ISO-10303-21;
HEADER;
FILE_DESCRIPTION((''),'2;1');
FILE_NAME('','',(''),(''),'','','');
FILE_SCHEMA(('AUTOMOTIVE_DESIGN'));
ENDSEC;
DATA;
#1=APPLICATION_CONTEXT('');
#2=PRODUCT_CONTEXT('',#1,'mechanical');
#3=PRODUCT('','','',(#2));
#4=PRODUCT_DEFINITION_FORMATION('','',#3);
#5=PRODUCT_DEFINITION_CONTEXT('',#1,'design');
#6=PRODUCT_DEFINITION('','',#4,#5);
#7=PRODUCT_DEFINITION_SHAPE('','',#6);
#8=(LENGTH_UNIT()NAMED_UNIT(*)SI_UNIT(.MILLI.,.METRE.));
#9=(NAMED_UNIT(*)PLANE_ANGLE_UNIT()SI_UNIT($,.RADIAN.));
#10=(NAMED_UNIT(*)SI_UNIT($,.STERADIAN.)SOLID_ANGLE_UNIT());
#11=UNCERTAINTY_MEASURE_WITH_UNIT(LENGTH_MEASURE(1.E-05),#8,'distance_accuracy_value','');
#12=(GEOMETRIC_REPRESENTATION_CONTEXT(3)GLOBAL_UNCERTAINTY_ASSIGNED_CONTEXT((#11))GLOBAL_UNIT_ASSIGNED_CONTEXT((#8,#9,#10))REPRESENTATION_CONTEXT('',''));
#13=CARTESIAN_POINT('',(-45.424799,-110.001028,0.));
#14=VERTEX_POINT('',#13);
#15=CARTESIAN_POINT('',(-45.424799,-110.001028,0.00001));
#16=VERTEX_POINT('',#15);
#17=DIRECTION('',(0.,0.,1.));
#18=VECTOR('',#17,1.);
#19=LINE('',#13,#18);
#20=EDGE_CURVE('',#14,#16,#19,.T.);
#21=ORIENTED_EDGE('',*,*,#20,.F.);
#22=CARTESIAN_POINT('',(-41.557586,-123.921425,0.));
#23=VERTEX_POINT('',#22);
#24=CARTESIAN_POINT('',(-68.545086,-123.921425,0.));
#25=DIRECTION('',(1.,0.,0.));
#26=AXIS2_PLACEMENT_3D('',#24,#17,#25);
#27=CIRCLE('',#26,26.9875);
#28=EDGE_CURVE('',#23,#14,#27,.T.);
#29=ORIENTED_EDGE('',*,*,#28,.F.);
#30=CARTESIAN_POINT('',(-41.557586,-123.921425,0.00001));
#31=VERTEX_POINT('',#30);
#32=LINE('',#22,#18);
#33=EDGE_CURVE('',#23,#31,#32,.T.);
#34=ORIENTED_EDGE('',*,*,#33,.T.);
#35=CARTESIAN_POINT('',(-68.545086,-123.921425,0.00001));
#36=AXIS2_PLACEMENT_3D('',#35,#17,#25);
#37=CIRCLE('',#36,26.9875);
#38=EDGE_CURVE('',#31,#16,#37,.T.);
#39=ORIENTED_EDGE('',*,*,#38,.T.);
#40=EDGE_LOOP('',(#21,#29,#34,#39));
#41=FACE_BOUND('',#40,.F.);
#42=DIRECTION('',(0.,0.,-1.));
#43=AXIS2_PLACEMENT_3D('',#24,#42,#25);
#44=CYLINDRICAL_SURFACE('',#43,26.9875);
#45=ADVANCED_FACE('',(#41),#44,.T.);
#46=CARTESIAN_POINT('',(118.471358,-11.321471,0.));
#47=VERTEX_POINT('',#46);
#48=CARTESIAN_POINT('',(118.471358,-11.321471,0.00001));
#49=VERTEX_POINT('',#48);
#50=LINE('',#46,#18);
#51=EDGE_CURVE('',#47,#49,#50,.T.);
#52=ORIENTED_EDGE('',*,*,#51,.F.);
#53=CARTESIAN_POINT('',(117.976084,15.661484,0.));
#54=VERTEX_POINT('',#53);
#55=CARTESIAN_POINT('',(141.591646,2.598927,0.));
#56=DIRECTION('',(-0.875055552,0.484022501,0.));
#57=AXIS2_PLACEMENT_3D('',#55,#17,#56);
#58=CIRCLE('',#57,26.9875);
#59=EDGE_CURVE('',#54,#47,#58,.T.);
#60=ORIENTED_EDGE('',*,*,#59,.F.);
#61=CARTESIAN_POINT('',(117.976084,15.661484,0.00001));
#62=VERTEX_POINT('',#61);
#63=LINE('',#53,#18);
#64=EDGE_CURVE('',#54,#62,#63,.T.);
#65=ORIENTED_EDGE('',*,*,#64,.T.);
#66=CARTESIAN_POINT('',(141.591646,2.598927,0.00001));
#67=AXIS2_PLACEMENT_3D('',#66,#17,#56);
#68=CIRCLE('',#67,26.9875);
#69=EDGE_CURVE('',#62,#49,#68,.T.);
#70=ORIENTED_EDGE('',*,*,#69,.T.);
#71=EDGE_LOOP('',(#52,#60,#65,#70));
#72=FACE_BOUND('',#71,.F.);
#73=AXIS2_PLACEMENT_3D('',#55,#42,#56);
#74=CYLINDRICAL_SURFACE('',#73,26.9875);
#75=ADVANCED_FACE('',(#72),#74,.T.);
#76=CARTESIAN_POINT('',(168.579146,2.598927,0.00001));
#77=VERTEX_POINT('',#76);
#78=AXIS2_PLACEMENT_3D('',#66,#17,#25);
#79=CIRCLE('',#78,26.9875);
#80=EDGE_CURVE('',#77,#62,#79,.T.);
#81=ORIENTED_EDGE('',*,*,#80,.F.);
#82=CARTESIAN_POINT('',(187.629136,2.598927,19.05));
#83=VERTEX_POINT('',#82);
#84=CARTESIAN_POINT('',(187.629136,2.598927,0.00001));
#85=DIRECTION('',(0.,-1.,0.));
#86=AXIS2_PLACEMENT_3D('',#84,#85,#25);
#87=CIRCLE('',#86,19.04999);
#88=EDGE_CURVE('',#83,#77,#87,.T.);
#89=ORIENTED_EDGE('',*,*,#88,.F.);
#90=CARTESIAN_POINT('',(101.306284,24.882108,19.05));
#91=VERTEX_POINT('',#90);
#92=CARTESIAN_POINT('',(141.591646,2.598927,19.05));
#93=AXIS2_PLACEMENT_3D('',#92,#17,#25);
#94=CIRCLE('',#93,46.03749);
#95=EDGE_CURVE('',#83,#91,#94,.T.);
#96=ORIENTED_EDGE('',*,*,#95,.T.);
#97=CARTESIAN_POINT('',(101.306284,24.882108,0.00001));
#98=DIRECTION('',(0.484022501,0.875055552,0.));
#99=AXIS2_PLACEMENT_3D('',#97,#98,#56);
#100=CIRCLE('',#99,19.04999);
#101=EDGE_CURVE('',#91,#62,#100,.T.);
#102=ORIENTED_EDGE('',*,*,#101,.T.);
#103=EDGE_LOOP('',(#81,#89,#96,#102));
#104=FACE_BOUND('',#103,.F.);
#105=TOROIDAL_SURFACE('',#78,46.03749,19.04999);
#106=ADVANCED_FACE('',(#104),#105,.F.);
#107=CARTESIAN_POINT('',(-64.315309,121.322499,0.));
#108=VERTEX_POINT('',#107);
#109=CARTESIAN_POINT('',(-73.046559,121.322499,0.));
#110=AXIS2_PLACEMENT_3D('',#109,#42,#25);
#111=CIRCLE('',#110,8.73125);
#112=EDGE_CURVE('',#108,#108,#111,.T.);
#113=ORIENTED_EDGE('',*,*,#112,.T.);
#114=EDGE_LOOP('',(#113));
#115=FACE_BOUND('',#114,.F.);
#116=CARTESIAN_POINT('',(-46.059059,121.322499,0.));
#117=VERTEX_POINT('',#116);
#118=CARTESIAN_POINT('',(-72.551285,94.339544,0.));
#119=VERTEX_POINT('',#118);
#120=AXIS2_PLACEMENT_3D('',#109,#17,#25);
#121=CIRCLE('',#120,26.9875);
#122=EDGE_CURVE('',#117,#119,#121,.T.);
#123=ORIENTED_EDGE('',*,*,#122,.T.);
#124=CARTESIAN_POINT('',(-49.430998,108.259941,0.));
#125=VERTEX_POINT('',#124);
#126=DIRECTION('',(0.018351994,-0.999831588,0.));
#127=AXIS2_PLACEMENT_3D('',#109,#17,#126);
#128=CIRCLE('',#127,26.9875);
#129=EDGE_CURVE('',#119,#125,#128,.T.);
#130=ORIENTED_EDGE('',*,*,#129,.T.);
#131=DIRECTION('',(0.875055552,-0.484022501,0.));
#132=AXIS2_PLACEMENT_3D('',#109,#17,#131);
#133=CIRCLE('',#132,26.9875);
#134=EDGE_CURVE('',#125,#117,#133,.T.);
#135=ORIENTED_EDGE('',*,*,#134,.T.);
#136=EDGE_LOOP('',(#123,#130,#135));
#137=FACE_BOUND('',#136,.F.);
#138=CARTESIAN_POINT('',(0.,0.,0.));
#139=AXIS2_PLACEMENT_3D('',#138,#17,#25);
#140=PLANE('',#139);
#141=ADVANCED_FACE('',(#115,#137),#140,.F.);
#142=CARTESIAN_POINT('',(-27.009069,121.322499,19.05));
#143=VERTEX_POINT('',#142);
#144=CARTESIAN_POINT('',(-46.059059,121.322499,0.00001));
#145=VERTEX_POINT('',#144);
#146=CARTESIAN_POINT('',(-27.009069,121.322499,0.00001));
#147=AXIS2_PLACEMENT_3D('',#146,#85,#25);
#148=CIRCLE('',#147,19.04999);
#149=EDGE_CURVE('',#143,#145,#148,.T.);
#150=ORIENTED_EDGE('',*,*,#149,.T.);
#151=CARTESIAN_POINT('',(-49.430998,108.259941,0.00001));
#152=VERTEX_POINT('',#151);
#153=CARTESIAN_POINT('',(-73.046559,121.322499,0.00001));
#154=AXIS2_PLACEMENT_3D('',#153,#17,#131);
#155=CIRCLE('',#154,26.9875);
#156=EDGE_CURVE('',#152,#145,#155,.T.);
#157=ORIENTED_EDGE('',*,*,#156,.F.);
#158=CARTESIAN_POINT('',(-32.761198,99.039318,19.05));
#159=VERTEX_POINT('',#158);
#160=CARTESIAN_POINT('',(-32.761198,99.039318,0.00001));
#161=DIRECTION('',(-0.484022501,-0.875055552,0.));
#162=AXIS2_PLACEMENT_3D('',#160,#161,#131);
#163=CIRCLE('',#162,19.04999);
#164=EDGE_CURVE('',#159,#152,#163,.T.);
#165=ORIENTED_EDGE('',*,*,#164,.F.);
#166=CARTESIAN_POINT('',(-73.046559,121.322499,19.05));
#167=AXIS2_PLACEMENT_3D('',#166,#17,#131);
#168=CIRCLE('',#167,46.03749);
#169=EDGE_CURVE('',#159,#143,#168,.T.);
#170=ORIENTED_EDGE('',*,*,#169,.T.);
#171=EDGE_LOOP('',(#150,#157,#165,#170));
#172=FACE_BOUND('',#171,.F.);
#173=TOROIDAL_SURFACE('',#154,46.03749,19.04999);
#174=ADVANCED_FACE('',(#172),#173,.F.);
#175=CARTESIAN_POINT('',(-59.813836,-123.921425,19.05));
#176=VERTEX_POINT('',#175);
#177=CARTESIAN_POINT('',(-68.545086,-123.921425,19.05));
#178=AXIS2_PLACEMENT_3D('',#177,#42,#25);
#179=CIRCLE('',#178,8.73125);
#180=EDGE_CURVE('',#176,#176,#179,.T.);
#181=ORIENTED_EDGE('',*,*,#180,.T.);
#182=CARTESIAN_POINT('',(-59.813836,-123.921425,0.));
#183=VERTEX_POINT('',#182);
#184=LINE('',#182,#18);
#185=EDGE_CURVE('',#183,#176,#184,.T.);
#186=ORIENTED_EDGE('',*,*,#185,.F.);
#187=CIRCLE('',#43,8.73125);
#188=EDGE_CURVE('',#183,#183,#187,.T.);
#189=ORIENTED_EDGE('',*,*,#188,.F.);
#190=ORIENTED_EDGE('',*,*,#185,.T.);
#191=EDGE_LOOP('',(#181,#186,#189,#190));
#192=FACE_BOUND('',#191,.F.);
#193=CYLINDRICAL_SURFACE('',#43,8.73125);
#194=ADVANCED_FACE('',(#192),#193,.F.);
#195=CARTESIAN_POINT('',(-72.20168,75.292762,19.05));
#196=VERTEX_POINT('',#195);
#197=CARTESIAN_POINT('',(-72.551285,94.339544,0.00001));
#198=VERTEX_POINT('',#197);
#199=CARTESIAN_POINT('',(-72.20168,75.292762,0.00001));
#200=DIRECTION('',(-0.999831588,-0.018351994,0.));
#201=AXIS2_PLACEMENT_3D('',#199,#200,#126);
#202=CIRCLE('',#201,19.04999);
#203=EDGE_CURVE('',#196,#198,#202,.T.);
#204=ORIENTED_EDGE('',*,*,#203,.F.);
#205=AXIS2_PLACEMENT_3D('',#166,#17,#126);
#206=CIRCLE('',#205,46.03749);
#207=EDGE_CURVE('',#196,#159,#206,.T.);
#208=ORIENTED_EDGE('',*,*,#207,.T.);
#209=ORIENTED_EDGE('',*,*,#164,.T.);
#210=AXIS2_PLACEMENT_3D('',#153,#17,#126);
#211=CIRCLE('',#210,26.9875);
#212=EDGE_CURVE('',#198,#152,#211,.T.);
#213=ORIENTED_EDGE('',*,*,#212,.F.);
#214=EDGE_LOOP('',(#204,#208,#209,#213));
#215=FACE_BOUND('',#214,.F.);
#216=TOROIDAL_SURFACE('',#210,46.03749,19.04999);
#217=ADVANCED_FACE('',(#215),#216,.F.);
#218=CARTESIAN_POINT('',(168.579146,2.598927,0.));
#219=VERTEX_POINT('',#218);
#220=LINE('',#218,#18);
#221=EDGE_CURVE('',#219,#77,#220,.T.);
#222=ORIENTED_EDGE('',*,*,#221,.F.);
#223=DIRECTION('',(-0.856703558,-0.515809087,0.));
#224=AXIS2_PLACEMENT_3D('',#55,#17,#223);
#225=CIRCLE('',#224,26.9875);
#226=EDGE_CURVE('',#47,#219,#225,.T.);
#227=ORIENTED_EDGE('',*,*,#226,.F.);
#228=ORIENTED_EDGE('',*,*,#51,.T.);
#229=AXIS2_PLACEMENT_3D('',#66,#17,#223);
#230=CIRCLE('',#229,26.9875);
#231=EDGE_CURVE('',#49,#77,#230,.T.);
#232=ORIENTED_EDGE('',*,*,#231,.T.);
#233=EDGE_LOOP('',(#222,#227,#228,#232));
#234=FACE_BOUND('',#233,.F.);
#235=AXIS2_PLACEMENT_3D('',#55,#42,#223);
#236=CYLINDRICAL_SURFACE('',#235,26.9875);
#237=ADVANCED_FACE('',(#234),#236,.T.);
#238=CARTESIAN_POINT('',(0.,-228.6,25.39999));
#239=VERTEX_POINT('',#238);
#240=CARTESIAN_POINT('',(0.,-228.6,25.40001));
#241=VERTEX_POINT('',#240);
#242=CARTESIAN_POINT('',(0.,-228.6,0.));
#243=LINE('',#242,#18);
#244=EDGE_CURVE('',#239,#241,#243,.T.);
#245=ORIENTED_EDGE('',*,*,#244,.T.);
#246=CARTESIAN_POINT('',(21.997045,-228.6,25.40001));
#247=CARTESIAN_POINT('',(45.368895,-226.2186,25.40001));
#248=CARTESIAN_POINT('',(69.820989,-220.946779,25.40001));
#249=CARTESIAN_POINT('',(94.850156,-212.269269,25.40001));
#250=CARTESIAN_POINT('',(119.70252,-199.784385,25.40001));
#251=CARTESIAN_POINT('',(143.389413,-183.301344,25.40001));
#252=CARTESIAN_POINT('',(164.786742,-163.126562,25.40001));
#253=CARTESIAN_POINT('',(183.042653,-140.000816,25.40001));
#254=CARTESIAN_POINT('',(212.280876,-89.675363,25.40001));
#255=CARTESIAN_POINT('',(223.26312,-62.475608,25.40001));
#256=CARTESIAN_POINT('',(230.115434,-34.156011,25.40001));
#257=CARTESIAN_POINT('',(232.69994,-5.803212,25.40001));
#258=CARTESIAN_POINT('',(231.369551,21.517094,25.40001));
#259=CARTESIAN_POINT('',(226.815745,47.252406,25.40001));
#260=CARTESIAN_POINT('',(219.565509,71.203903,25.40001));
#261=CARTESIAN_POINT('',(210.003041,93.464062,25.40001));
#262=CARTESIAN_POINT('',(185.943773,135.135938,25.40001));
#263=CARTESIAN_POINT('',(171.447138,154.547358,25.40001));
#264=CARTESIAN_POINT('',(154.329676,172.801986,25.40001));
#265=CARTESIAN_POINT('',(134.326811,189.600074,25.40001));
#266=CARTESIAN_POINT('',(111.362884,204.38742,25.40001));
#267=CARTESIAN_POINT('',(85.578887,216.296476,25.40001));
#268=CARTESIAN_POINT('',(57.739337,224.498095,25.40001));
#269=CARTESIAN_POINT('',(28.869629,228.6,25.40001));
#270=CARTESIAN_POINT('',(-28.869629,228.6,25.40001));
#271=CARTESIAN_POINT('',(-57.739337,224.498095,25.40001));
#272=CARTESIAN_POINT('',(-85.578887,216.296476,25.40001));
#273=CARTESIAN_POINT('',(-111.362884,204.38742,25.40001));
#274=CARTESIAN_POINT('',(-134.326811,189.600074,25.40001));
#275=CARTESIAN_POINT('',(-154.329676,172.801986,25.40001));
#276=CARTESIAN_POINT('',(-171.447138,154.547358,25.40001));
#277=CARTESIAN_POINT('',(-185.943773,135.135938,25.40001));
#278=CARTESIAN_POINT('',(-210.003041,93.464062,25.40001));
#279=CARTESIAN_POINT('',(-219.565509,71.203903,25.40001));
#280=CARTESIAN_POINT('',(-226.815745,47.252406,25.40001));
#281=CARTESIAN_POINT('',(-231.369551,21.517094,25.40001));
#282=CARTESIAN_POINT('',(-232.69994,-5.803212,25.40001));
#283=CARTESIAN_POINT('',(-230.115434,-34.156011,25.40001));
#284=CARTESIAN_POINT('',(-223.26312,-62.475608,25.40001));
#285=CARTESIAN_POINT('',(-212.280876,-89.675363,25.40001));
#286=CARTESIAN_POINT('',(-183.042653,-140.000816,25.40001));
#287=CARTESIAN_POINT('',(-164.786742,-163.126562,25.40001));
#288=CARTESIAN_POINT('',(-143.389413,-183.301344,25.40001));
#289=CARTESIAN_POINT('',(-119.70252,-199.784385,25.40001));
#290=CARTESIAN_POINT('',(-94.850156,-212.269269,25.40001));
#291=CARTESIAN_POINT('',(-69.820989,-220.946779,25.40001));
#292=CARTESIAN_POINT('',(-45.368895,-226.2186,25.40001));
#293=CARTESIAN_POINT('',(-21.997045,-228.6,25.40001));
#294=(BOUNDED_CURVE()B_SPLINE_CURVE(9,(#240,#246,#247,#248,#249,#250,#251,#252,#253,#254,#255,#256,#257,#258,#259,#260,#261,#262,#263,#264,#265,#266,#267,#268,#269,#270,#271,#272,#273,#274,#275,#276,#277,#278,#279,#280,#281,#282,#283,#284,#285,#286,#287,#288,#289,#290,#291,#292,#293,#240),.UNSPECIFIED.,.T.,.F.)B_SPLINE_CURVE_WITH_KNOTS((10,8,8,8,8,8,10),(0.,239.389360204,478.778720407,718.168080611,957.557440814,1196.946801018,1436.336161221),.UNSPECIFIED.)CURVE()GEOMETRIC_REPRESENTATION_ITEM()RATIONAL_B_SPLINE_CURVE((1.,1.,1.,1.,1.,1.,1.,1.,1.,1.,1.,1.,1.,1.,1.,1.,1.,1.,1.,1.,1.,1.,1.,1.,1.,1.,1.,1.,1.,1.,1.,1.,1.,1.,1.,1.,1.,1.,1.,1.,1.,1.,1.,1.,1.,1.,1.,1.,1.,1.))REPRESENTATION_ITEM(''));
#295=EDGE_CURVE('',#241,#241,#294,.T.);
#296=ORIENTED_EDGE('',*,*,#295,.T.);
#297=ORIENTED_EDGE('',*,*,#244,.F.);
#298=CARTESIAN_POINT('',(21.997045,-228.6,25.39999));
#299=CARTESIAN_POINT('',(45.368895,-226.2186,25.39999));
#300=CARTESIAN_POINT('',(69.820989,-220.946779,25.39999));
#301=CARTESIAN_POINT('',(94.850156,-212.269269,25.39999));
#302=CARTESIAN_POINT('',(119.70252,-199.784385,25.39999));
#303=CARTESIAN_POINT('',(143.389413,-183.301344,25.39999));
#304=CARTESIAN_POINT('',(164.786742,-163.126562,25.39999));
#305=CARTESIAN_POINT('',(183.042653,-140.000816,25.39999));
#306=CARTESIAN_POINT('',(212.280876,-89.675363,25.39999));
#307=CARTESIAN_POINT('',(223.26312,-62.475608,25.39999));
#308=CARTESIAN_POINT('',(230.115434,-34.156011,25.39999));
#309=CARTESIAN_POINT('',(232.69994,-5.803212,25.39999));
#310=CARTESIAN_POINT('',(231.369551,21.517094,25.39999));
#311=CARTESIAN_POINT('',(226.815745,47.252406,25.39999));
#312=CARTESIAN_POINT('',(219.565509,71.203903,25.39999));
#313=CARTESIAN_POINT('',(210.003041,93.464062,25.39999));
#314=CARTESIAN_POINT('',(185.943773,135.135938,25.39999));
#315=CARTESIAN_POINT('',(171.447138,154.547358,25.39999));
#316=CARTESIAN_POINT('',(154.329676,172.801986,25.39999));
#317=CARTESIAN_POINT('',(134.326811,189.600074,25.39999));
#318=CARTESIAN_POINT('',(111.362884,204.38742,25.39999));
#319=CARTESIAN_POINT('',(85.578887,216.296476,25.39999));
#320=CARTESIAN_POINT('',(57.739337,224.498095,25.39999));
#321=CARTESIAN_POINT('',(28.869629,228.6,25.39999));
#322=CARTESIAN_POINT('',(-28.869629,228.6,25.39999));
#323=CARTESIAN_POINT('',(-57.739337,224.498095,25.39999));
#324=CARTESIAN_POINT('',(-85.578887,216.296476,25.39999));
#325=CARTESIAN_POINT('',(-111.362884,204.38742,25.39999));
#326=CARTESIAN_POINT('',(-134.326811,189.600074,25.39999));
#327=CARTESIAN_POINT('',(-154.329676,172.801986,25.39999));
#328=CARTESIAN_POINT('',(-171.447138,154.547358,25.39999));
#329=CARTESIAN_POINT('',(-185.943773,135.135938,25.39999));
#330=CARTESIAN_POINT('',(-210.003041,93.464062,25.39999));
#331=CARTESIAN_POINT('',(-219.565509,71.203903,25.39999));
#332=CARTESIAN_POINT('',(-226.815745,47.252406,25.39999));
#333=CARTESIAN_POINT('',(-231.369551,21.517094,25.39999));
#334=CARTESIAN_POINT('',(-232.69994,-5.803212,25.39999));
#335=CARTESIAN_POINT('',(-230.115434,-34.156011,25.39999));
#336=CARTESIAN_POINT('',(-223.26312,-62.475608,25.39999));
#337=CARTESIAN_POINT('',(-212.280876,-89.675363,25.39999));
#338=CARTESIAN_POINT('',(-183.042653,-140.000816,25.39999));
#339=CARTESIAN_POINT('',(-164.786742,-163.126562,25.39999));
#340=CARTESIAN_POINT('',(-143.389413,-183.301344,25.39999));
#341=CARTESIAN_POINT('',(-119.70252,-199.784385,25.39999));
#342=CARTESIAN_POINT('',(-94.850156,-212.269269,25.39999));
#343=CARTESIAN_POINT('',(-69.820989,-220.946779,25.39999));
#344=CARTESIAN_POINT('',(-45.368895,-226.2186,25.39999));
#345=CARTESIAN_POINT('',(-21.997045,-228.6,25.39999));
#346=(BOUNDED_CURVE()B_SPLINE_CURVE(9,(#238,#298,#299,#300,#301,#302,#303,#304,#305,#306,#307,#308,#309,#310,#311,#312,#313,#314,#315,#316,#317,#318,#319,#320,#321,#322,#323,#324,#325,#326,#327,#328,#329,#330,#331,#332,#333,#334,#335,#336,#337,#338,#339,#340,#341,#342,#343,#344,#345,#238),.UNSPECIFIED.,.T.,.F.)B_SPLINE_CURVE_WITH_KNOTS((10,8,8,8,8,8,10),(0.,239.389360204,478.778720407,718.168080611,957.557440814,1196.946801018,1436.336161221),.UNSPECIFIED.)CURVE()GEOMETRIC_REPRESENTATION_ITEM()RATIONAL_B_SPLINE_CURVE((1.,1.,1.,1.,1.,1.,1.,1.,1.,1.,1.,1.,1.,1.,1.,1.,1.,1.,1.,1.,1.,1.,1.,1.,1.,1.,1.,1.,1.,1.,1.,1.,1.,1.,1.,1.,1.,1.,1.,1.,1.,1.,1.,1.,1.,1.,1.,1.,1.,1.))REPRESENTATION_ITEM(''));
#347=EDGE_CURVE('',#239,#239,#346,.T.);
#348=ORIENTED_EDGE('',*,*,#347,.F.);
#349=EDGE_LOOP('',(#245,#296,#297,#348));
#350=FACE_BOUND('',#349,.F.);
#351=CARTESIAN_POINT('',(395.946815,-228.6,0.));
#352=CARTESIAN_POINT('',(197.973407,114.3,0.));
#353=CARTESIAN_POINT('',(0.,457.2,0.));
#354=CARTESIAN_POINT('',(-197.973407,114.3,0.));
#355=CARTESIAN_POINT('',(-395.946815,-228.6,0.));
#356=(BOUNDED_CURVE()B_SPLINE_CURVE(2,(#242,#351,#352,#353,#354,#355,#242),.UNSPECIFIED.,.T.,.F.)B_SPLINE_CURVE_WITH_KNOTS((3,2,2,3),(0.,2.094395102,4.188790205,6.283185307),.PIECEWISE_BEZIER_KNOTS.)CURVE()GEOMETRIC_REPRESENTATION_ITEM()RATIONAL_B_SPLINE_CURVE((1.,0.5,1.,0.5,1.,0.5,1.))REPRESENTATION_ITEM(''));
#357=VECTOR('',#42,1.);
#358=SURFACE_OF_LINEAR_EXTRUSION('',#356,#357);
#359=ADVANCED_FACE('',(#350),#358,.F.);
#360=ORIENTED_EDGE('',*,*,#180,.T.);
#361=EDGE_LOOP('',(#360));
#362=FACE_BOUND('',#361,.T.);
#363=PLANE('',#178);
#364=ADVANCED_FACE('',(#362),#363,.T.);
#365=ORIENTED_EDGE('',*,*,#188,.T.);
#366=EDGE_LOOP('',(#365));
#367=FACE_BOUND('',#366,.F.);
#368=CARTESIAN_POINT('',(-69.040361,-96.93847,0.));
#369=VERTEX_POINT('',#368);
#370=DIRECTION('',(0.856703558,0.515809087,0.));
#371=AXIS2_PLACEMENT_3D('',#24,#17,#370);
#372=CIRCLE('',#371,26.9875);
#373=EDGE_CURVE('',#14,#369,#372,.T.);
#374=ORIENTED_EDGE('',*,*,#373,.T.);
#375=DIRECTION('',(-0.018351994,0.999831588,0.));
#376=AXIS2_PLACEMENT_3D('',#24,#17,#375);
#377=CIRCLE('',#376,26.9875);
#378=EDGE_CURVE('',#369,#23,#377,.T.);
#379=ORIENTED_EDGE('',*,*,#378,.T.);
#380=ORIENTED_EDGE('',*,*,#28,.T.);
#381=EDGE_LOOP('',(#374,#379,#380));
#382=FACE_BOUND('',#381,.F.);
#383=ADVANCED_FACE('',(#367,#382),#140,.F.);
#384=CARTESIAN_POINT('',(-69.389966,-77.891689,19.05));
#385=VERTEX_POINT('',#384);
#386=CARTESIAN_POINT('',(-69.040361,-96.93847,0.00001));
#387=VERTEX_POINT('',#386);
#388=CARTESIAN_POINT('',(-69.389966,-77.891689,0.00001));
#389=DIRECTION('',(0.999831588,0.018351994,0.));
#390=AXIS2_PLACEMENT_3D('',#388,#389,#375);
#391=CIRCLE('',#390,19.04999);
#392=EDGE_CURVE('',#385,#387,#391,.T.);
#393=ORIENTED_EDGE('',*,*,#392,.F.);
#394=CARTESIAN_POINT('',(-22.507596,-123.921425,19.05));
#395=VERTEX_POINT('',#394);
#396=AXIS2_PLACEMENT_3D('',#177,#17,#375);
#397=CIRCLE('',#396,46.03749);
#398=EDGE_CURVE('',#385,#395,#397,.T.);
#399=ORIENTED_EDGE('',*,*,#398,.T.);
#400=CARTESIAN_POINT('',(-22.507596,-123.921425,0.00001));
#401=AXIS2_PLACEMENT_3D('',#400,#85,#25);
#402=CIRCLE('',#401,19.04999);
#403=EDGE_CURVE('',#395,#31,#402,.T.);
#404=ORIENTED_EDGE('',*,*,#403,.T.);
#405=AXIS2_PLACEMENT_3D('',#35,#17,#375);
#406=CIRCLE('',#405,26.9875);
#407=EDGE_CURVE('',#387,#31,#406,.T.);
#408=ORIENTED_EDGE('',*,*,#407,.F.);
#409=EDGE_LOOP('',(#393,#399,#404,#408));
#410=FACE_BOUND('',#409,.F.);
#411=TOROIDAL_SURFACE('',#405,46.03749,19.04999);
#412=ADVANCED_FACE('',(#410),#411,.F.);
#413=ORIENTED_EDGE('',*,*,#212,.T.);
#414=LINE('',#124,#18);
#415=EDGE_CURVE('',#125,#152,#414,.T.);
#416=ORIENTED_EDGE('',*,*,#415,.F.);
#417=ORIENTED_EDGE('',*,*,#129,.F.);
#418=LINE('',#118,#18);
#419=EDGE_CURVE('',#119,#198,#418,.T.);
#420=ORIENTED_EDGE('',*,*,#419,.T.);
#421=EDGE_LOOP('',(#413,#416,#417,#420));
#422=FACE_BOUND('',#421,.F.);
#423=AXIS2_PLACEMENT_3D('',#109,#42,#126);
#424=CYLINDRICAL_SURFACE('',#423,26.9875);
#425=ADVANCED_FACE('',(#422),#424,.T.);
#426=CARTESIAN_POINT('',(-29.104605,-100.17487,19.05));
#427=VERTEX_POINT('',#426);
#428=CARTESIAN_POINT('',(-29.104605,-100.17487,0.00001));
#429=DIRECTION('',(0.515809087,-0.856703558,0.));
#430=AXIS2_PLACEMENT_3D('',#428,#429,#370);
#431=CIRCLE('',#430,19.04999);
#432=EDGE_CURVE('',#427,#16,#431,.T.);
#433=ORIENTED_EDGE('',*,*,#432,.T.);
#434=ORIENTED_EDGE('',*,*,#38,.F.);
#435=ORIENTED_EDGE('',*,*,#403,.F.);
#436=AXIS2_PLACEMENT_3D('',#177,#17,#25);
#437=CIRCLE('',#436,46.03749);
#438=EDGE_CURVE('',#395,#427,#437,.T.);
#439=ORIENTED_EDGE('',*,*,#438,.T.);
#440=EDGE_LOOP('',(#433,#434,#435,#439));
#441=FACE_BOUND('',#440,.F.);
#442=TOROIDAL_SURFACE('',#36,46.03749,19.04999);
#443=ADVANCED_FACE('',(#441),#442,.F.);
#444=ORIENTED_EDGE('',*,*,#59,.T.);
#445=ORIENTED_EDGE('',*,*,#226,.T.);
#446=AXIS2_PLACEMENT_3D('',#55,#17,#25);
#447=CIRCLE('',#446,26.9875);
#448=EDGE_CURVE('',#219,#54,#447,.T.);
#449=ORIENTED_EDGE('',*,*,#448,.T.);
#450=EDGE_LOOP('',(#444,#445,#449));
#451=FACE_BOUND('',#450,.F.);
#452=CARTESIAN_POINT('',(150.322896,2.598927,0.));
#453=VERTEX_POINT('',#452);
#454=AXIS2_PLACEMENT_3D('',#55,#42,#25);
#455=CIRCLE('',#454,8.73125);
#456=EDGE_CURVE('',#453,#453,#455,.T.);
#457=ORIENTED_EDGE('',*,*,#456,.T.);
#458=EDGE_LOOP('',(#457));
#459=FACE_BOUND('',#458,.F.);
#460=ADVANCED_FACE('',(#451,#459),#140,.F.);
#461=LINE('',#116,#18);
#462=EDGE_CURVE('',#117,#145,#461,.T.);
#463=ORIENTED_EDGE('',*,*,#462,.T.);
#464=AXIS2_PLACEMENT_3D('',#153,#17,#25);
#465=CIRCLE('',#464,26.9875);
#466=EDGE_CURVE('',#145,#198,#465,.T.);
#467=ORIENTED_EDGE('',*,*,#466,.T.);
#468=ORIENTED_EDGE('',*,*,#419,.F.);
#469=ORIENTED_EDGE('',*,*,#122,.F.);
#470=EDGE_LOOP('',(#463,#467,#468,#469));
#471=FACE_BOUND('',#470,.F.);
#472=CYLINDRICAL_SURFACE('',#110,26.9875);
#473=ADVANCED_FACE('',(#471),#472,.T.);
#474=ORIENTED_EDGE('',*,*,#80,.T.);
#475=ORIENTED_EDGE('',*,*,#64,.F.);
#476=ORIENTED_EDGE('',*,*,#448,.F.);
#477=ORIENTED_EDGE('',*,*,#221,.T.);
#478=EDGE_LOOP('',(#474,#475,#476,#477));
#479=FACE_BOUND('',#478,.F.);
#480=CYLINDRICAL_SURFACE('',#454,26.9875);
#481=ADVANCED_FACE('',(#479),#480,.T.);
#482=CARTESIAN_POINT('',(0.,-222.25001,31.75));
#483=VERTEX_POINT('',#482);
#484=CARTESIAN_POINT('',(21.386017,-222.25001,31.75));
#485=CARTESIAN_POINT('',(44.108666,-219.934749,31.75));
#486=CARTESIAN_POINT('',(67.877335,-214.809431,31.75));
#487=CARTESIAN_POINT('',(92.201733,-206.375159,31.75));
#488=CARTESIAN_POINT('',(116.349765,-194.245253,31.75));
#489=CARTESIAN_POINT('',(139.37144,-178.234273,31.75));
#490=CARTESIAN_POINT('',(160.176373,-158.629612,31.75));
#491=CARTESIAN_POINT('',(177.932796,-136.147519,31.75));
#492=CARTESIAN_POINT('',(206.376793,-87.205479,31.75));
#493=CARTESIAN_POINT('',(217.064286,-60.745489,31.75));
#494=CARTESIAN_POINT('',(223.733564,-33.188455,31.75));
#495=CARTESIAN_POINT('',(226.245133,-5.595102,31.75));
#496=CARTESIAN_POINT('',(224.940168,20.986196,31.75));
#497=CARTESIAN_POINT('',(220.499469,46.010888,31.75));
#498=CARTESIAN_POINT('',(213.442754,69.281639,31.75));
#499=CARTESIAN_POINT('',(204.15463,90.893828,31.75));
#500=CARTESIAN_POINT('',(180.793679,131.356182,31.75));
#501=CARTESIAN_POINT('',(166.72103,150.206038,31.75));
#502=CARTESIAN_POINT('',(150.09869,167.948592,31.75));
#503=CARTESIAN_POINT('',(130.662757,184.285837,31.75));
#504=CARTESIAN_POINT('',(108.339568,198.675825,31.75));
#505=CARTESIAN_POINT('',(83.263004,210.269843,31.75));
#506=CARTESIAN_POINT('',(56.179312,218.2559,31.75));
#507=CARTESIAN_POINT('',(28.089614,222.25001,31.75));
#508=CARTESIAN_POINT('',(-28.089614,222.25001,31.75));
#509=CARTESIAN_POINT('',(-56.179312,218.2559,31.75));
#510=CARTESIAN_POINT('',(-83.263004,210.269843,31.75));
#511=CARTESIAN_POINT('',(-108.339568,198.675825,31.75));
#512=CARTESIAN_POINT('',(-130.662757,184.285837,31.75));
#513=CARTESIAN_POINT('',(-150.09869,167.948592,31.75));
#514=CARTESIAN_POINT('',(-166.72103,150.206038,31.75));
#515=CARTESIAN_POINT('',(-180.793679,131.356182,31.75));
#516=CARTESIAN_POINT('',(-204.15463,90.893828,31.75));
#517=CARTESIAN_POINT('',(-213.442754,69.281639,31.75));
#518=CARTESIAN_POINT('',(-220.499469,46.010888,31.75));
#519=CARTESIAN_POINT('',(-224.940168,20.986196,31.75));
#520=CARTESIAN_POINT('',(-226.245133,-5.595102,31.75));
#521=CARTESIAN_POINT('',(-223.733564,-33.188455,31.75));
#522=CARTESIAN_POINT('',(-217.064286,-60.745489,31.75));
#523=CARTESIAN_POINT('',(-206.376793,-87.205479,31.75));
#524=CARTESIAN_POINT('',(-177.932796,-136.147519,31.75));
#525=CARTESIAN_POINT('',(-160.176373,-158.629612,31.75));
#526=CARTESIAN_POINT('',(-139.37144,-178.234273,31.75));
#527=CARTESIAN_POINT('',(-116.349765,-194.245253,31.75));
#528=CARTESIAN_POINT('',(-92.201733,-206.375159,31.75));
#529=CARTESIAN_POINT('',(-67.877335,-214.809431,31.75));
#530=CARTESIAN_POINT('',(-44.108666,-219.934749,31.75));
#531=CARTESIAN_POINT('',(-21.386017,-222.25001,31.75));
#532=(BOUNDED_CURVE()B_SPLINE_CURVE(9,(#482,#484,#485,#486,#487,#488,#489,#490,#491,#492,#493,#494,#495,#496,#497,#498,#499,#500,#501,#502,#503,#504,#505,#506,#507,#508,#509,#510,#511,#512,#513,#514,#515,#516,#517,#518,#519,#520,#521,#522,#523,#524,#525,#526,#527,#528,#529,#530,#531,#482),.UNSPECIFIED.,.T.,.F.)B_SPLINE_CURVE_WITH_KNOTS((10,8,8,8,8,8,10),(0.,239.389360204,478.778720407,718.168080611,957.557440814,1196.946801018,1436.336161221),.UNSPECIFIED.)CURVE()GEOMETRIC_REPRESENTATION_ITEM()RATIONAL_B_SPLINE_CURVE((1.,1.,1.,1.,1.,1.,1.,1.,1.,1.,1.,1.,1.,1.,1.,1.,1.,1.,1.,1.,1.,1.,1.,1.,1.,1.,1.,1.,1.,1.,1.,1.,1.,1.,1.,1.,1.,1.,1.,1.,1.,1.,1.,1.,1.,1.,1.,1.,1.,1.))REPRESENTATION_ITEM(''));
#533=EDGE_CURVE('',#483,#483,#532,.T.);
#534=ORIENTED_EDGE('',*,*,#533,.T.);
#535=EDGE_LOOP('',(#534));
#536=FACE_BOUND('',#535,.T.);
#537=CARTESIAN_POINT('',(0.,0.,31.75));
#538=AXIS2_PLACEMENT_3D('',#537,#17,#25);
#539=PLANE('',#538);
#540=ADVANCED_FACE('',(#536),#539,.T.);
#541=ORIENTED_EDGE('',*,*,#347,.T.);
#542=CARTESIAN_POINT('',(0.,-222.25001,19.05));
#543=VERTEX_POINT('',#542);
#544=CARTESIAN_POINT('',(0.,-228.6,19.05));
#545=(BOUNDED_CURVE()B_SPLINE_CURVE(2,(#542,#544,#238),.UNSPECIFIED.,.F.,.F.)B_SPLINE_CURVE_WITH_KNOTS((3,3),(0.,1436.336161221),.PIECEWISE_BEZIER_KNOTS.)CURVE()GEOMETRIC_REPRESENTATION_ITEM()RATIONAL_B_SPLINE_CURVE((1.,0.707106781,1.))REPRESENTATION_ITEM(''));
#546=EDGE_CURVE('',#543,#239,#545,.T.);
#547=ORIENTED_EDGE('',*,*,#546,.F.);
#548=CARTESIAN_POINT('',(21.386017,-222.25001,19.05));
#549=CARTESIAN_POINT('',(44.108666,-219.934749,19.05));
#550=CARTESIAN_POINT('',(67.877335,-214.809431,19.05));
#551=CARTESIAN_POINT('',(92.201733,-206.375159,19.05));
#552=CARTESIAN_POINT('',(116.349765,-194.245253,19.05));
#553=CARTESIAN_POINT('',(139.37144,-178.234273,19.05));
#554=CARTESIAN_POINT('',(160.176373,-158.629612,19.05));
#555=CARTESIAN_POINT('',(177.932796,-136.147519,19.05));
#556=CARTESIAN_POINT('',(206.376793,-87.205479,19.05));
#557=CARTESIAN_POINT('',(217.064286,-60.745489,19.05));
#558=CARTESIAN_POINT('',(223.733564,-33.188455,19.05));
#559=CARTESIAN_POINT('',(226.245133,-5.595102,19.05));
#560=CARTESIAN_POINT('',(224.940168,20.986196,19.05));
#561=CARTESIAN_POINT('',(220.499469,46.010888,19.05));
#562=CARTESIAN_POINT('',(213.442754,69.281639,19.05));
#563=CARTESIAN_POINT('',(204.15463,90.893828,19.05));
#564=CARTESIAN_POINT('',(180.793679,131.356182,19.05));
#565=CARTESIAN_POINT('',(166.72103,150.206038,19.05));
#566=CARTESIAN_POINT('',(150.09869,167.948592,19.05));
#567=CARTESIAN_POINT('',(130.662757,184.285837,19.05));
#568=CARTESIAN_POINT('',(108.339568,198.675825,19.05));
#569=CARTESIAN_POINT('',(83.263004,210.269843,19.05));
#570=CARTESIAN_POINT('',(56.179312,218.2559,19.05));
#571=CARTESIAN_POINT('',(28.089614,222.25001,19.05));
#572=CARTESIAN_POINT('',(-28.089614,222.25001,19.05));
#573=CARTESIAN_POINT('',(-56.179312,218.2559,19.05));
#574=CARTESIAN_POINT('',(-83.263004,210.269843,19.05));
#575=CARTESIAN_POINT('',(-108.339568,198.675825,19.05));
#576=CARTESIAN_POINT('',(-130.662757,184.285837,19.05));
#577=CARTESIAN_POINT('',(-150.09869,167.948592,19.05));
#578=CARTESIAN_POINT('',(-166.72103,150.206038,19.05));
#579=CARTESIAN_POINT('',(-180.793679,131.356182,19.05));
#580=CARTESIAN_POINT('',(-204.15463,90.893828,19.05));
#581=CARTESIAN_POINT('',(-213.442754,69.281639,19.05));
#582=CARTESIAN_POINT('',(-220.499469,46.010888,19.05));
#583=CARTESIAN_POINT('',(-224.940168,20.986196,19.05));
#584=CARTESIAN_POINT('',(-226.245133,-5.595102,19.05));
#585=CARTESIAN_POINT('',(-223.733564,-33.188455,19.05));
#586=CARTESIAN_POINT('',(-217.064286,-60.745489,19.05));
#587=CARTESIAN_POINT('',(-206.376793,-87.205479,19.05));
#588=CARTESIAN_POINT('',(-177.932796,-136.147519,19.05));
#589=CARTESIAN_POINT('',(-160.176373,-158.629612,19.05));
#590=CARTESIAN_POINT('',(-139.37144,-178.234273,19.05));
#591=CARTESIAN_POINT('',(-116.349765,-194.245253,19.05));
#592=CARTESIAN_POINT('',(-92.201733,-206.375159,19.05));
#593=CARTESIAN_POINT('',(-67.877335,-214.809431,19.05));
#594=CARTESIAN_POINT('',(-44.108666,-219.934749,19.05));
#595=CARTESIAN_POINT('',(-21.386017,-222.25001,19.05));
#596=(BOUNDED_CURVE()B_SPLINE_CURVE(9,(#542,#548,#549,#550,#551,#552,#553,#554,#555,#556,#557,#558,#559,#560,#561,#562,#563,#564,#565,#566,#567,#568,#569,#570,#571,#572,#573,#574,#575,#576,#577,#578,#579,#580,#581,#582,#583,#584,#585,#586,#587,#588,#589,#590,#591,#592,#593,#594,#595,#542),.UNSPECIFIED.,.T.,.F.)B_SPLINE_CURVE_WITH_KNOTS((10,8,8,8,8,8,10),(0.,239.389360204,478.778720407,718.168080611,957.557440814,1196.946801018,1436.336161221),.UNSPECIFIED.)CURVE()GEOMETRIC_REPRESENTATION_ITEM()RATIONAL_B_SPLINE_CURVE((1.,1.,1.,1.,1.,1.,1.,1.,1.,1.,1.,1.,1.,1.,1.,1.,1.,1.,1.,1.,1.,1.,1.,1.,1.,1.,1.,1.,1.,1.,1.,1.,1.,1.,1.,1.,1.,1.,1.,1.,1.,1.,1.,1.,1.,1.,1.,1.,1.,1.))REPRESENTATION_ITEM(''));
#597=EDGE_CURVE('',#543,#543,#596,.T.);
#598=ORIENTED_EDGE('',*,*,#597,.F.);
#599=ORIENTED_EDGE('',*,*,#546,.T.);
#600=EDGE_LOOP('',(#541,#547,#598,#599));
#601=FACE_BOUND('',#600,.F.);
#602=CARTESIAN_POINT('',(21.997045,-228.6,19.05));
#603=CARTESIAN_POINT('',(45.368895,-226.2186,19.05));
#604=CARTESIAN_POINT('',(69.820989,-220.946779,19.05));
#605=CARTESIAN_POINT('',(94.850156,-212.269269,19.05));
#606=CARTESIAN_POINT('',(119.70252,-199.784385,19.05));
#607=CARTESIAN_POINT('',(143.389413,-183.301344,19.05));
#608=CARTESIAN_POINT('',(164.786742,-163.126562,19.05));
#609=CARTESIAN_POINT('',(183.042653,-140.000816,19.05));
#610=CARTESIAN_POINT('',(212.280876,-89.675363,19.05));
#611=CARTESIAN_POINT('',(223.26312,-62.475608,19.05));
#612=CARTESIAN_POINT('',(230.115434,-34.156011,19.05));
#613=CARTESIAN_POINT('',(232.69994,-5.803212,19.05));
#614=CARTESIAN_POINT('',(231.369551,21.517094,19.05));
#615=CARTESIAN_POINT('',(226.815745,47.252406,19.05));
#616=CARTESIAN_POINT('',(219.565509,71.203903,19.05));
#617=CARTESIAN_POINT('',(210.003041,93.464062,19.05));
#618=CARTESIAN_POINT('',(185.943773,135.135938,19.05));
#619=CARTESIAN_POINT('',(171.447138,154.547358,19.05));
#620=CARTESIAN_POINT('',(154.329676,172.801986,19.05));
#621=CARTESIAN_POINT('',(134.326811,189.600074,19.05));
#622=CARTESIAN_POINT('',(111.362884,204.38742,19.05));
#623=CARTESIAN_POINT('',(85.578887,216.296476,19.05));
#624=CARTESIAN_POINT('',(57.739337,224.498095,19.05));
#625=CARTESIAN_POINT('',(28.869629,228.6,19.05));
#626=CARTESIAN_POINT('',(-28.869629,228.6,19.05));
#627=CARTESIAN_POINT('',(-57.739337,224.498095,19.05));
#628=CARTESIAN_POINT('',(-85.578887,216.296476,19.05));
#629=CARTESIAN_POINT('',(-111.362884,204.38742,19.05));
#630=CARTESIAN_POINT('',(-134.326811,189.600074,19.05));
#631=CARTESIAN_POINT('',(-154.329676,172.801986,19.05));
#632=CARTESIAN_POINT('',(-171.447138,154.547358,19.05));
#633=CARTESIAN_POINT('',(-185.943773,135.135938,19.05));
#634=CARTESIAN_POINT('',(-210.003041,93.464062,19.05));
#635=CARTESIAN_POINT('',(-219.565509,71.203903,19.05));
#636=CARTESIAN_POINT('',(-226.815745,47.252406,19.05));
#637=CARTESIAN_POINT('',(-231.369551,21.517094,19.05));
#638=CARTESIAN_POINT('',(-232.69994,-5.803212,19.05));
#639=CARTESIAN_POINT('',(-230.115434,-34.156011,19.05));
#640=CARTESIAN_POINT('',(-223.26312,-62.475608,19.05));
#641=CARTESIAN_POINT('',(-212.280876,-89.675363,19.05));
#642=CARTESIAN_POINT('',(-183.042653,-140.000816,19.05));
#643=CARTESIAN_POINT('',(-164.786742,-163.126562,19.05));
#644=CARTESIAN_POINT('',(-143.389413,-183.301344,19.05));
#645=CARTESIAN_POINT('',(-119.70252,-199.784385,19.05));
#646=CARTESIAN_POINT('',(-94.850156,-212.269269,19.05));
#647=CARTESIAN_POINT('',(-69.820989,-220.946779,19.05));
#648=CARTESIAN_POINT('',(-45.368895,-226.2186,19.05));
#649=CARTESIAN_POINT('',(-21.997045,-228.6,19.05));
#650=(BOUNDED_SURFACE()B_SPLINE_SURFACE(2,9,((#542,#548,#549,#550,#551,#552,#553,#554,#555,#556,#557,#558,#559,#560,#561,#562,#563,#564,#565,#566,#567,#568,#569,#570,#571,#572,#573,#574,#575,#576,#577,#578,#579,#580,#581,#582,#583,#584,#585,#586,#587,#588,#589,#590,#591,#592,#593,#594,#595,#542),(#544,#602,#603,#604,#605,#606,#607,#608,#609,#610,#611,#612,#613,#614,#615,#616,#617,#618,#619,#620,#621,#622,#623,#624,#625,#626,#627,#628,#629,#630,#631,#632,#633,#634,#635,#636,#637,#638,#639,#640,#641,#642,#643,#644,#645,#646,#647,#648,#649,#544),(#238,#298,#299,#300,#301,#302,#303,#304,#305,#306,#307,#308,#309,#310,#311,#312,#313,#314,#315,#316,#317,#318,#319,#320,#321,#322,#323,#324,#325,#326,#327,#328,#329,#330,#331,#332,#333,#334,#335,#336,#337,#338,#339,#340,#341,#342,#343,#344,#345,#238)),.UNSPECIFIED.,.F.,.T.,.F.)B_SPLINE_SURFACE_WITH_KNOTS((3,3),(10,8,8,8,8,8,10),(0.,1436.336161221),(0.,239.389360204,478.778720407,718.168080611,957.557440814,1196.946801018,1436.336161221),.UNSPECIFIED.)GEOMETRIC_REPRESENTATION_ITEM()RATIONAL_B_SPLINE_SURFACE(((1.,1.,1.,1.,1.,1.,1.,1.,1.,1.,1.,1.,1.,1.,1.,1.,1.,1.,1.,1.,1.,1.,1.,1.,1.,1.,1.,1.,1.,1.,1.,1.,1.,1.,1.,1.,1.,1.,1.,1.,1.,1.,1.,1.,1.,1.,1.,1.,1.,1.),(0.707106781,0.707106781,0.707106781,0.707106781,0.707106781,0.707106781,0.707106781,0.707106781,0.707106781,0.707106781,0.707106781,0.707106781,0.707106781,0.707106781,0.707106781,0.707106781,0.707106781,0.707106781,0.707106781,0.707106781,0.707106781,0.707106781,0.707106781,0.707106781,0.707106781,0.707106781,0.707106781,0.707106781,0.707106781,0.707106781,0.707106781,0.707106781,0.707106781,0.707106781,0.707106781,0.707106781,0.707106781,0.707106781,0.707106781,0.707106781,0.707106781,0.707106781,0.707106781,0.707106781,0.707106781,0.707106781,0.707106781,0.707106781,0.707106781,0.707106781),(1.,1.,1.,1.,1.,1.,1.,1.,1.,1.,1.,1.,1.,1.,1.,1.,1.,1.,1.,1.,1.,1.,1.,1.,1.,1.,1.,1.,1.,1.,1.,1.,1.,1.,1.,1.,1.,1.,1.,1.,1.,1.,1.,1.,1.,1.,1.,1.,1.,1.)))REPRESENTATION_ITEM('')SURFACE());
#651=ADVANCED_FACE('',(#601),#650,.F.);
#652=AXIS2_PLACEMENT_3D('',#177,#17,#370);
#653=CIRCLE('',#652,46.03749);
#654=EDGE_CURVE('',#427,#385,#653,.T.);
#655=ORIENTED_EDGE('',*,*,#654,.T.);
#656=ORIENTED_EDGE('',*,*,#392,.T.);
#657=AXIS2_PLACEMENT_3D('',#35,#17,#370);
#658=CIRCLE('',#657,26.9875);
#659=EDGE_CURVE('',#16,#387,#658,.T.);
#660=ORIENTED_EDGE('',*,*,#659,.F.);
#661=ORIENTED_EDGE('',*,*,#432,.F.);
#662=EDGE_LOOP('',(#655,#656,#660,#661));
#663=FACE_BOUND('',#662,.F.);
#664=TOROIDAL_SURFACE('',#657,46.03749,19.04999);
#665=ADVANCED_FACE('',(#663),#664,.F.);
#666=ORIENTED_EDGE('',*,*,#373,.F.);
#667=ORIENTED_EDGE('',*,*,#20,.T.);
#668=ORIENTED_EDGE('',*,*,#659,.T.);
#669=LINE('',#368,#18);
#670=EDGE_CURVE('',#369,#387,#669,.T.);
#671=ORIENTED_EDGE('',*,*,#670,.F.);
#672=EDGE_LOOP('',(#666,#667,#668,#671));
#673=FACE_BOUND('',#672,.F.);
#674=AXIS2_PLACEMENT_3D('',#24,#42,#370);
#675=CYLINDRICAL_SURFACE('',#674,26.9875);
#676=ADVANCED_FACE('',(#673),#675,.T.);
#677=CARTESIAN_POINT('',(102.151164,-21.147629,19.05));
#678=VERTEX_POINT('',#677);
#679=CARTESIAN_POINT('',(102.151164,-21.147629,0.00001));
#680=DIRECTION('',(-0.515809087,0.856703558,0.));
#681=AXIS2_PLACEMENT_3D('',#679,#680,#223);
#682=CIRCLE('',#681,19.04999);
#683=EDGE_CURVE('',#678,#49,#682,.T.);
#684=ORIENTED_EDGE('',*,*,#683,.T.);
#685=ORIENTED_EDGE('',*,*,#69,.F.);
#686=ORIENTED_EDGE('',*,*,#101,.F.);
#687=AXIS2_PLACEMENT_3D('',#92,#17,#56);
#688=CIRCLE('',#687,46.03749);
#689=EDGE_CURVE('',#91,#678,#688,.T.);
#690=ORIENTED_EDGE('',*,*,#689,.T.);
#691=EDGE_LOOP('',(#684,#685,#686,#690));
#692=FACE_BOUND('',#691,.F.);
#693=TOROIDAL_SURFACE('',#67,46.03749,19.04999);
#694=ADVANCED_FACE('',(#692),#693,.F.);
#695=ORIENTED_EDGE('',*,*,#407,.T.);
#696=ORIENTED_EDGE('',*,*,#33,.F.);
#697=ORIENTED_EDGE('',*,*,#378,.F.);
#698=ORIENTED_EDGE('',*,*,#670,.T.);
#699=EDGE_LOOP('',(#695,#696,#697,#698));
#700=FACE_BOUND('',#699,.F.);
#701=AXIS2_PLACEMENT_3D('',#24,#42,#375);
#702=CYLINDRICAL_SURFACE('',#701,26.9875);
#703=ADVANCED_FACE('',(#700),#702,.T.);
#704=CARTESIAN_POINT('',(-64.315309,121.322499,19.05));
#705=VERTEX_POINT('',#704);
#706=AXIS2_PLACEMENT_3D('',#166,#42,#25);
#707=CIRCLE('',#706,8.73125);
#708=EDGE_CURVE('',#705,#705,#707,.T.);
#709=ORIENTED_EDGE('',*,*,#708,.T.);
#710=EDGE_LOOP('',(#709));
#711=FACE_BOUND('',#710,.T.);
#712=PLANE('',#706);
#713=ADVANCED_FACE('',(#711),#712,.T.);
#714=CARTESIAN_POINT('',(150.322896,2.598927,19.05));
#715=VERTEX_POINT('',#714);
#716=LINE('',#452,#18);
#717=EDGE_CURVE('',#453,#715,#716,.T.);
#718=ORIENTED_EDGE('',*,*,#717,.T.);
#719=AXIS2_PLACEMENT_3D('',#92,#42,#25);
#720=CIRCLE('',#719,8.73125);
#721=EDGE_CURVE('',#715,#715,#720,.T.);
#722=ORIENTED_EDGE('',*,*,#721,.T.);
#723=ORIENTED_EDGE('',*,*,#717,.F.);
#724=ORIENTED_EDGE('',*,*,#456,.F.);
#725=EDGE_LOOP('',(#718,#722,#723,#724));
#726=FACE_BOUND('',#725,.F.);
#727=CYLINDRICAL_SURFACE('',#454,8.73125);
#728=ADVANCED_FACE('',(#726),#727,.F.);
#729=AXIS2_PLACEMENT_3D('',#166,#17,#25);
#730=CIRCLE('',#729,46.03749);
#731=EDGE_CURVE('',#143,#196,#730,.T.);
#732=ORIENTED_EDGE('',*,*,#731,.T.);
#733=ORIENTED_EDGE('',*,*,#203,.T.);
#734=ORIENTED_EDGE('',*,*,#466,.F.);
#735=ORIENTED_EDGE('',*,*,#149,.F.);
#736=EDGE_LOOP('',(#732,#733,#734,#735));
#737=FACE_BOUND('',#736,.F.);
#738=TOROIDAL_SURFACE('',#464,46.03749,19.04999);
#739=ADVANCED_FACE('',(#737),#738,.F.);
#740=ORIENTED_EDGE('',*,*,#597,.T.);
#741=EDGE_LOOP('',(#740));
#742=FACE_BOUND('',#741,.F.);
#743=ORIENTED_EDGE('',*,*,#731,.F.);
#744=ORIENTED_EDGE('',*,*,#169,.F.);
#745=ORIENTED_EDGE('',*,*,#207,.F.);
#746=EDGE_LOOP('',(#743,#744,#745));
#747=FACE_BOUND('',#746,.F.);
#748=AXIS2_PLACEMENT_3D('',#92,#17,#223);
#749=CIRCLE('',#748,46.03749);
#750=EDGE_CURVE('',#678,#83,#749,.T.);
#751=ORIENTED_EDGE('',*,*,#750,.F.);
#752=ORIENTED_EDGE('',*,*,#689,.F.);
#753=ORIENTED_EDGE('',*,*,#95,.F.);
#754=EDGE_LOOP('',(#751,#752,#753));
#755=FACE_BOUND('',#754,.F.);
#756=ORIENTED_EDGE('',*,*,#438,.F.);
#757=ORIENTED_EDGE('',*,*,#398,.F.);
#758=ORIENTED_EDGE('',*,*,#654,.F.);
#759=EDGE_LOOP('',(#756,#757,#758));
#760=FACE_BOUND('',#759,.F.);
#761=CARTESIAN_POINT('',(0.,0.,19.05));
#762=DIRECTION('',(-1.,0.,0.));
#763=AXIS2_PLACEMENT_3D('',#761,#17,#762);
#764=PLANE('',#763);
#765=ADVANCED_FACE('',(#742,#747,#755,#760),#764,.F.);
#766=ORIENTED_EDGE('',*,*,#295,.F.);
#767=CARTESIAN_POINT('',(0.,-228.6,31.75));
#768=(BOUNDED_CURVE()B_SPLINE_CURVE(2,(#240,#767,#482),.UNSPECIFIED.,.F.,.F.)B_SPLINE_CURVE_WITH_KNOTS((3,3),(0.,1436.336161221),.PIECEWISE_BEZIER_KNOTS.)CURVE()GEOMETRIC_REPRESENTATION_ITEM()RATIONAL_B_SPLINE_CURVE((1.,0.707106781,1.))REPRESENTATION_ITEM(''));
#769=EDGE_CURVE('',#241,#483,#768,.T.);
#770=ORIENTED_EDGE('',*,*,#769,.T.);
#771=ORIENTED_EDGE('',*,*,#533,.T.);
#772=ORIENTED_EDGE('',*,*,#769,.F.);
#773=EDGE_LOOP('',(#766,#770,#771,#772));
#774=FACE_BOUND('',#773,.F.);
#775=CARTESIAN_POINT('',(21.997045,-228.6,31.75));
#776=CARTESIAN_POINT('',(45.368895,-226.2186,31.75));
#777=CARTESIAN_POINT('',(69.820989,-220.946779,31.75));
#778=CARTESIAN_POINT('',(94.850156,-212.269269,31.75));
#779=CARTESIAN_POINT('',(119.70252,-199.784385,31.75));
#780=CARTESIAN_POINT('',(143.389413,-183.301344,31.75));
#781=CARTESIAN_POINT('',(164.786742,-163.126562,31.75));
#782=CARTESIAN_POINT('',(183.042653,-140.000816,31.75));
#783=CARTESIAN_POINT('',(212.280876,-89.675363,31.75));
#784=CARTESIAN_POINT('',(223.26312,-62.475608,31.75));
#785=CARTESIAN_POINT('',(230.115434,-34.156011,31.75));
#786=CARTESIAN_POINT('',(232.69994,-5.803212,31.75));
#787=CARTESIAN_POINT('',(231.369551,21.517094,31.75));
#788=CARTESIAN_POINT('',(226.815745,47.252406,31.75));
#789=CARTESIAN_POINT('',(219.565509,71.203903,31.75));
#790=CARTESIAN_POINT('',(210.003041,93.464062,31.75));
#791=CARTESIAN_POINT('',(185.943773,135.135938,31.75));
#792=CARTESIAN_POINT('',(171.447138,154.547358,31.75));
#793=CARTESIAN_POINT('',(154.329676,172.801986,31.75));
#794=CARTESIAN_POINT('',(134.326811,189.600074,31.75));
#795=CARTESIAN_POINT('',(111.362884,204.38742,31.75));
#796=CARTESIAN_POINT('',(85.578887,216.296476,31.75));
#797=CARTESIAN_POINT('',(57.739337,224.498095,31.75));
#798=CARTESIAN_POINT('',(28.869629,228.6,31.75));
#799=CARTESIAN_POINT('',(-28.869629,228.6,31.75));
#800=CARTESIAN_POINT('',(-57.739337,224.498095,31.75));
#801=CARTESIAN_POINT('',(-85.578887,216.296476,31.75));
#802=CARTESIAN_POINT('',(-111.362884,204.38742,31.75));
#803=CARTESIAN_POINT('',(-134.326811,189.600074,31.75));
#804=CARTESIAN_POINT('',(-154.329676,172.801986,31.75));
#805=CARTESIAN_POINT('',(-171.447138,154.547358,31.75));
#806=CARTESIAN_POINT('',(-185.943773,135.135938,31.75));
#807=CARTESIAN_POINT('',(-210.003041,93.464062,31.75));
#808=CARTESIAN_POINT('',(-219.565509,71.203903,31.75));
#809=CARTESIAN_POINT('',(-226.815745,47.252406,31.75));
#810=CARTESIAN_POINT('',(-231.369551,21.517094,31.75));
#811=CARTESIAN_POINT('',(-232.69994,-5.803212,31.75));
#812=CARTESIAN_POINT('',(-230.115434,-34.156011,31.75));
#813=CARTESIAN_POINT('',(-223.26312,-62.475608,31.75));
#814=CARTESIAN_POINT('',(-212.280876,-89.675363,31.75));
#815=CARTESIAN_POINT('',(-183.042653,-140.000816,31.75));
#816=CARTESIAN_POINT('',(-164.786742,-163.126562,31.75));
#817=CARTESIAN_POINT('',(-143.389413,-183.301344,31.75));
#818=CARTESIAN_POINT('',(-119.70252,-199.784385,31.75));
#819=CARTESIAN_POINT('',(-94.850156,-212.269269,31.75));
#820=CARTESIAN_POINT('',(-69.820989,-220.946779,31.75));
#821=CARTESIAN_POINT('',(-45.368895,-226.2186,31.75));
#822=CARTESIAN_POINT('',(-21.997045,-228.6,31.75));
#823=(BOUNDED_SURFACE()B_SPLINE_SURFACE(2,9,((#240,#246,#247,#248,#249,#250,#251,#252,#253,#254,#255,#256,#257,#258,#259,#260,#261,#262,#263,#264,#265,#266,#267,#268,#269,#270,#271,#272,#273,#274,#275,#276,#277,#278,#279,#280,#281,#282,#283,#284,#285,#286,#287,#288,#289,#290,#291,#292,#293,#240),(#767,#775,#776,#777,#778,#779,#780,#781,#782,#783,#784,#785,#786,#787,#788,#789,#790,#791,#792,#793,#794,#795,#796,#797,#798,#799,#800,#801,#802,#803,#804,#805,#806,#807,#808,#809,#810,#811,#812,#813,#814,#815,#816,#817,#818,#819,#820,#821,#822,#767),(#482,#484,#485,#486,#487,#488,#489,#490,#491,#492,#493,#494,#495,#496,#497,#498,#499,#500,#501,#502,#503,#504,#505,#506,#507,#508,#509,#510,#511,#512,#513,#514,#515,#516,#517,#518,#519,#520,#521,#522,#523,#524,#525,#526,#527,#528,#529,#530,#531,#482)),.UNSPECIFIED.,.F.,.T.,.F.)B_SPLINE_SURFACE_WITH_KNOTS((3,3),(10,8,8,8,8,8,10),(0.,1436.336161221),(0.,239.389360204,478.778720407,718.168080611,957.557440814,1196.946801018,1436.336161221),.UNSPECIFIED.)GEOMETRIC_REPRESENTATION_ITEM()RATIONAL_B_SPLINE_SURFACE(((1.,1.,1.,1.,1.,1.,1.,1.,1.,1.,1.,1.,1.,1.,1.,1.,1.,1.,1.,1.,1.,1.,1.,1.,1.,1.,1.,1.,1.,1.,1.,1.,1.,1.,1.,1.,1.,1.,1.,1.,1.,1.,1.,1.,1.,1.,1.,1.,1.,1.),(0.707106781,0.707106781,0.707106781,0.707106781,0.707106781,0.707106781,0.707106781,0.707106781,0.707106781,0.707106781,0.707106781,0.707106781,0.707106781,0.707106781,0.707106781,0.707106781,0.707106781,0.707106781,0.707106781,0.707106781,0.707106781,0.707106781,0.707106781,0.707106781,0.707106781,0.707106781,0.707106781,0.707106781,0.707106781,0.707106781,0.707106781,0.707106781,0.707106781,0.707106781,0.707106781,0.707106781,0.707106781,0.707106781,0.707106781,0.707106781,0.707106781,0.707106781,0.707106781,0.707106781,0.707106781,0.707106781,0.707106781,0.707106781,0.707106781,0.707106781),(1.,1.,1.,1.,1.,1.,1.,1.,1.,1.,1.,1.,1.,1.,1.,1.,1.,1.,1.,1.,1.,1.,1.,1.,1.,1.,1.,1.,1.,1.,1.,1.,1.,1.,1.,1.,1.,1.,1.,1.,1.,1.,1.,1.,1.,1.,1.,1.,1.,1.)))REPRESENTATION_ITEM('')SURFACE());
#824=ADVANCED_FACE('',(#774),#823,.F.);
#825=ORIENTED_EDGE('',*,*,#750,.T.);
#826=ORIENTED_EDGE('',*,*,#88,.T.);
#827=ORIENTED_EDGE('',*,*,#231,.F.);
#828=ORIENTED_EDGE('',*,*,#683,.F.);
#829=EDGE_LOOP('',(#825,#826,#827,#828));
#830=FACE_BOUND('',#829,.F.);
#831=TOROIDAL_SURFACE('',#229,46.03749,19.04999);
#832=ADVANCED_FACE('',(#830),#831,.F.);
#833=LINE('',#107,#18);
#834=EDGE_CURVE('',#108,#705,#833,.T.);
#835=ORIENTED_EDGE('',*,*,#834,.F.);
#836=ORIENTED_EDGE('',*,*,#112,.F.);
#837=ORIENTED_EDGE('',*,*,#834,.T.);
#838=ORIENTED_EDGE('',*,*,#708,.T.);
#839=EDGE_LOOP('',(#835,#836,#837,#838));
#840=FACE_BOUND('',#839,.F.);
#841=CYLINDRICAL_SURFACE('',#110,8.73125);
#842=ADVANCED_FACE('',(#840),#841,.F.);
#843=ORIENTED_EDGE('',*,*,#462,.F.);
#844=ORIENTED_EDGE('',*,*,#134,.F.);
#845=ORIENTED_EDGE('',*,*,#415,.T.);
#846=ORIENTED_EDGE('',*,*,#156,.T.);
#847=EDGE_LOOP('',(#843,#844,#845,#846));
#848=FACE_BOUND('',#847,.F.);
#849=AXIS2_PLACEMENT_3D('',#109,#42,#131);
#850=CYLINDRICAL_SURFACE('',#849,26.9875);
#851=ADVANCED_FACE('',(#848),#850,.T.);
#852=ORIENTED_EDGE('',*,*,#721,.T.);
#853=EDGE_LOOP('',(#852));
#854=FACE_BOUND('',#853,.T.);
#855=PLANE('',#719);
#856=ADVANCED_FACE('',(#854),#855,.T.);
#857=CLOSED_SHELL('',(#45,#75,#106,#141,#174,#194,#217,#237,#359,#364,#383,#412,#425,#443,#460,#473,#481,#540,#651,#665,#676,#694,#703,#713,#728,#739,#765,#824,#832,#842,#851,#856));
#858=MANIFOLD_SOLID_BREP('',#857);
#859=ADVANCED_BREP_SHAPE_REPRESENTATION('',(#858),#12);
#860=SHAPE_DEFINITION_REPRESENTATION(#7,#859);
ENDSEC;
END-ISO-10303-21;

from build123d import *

# Parameters (mm, degrees)
F1_DEPTH = 31.75
F3_DEPTH = 19.05
F4_R     = 19.04999
F5_R     = 6.34999
F6_R     = 8.73125
F7_R     = 8.73125
F8_R     = 8.73125
F9_DEPTH = 19.05


# Not quite as in the source:
# - a fillet or chamfer is up to 0.001 mm smaller than in the source, because OpenCascade refuses the exact size


with BuildPart() as f1:
    # F0 (on Top) → F1 (new body)
    with BuildSketch(Plane.XY):
        with BuildLine():
            add(Edge.make_bspline(
                [(0, -228.6), (395.9468146102, -228.6), (197.9734073051, 114.3), (0, 457.2), (-197.9734073051, 114.3), (-395.9468146102, -228.6), (0, -228.6)],
                knots=[0, 0, 0, 2.0943951024, 2.0943951024, 4.1887902048, 4.1887902048, 6.2831853072, 6.2831853072, 6.2831853072], degree=2, weights=[1, 0.5, 1, 0.5, 1, 0.5, 1]))
        make_face()
    extrude(amount=F1_DEPTH)

    # F2 (on face) → F3 (cut)
    with BuildSketch(Plane(origin=(0, 0, 0), x_dir=(1, 0, 0), z_dir=(0, 0, -1))):
        with BuildLine():
            add(Edge.make_bspline(
                [(0, 228.6), (395.9468146102, 228.6), (197.9734073051, -114.3), (0, -457.2), (-197.9734073051, -114.3), (-395.9468146102, 228.6), (0, 228.6)],
                knots=[0, 0, 0, 2.0943951024, 2.0943951024, 4.1887902048, 4.1887902048, 6.2831853072, 6.2831853072, 6.2831853072], degree=2, weights=[1, 0.5, 1, 0.5, 1, 0.5, 1]))
        make_face()
        with BuildLine():
            ThreePointArc((-41.557586209, 123.9214253546), (-42.5423564602, 116.6976312088), (-45.4247989454, 110.0010276198))
            Line((-45.4247989454, 110.0010276198), (118.4713582711, 11.3214710191))
            ThreePointArc((118.4713582711, 11.3214710191), (148.8154396806, 23.4038030331), (168.5791455348, -2.5989267157))
            ThreePointArc((168.5791455348, -2.5989267157), (148.3370211672, -28.7298483188), (117.9760838338, -15.6614839614))
            Line((117.9760838338, -15.6614839614), (-49.4309976248, -108.2599413932))
            ThreePointArc((-49.4309976248, -108.2599413932), (-46.9156377226, -114.5771230065), (-46.0590593257, -121.3224986389))
            ThreePointArc((-46.0590593257, -121.3224986389), (-92.3039134421, -140.2296260962), (-72.5512848884, -94.3395436584))
            Line((-72.5512848884, -94.3395436584), (-69.0403606463, 96.9384703741))
            ThreePointArc((-69.0403606463, 96.9384703741), (-87.4522136664, 143.178779471), (-41.557586209, 123.9214253546))
        make_face(mode=Mode.SUBTRACT)
        with BuildLine():
            Line((118.4713582711, 11.3214710191), (-45.4247989454, 110.0010276198))
            ThreePointArc((-45.4247989454, 110.0010276198), (-55.4825289633, 100.3058636536), (-69.0403606463, 96.9384703741))
            Line((-69.0403606463, 96.9384703741), (-72.5512848884, -94.3395436584))
            ThreePointArc((-72.5512848884, -94.3395436584), (-59.1261615909, -98.2022113753), (-49.4309976248, -108.2599413932))
            Line((-49.4309976248, -108.2599413932), (117.9760838338, -15.6614839614))
            ThreePointArc((117.9760838338, -15.6614839614), (114.6086905542, -2.1036522784), (118.4713582711, 11.3214710191))
        make_face()
    extrude(amount=-F3_DEPTH, mode=Mode.SUBTRACT)

    # F4 (radius 19.05 in the source; OpenCascade refuses exactly that, so slightly less here)
    f4_edges = [f1.edges().sort_by_distance(p)[0] for p in [
        (-91.665373, -137.841823, 19.05),
        (165.207207, -10.463631, 19.05),
        (-73.541834, 148.305454, 19.05),
    ]]
    fillet(f4_edges, radius=F4_R)

    # F5 (radius 6.35 in the source; OpenCascade refuses exactly that, so slightly less here)
    f5_edges = [f1.edges().sort_by_distance(p)[0] for p in [
        (0, 228.6, 31.75),
        (0, 228.6, 19.05),
    ]]
    fillet(f5_edges, radius=F5_R)

    # F6 (on face) + F7 (on face) + F8 (on face) → F9 (cut)
    with BuildSketch(Plane(origin=(0, 0, 0), x_dir=(1, 0, 0), z_dir=(0, 0, -1))):
        with Locations((-68.545086209, 123.9214253546)):
            Circle(F6_R)
    with BuildSketch(Plane(origin=(0, 0, 0), x_dir=(1, 0, 0), z_dir=(0, 0, -1))):
        with Locations((141.5916455348, -2.5989267157)):
            Circle(F7_R)
    with BuildSketch(Plane(origin=(0, 0, 0), x_dir=(1, 0, 0), z_dir=(0, 0, -1))):
        with Locations((-73.0465593257, -121.3224986389)):
            Circle(F8_R)
    extrude(amount=-F9_DEPTH, mode=Mode.SUBTRACT)


solid = f1.part
